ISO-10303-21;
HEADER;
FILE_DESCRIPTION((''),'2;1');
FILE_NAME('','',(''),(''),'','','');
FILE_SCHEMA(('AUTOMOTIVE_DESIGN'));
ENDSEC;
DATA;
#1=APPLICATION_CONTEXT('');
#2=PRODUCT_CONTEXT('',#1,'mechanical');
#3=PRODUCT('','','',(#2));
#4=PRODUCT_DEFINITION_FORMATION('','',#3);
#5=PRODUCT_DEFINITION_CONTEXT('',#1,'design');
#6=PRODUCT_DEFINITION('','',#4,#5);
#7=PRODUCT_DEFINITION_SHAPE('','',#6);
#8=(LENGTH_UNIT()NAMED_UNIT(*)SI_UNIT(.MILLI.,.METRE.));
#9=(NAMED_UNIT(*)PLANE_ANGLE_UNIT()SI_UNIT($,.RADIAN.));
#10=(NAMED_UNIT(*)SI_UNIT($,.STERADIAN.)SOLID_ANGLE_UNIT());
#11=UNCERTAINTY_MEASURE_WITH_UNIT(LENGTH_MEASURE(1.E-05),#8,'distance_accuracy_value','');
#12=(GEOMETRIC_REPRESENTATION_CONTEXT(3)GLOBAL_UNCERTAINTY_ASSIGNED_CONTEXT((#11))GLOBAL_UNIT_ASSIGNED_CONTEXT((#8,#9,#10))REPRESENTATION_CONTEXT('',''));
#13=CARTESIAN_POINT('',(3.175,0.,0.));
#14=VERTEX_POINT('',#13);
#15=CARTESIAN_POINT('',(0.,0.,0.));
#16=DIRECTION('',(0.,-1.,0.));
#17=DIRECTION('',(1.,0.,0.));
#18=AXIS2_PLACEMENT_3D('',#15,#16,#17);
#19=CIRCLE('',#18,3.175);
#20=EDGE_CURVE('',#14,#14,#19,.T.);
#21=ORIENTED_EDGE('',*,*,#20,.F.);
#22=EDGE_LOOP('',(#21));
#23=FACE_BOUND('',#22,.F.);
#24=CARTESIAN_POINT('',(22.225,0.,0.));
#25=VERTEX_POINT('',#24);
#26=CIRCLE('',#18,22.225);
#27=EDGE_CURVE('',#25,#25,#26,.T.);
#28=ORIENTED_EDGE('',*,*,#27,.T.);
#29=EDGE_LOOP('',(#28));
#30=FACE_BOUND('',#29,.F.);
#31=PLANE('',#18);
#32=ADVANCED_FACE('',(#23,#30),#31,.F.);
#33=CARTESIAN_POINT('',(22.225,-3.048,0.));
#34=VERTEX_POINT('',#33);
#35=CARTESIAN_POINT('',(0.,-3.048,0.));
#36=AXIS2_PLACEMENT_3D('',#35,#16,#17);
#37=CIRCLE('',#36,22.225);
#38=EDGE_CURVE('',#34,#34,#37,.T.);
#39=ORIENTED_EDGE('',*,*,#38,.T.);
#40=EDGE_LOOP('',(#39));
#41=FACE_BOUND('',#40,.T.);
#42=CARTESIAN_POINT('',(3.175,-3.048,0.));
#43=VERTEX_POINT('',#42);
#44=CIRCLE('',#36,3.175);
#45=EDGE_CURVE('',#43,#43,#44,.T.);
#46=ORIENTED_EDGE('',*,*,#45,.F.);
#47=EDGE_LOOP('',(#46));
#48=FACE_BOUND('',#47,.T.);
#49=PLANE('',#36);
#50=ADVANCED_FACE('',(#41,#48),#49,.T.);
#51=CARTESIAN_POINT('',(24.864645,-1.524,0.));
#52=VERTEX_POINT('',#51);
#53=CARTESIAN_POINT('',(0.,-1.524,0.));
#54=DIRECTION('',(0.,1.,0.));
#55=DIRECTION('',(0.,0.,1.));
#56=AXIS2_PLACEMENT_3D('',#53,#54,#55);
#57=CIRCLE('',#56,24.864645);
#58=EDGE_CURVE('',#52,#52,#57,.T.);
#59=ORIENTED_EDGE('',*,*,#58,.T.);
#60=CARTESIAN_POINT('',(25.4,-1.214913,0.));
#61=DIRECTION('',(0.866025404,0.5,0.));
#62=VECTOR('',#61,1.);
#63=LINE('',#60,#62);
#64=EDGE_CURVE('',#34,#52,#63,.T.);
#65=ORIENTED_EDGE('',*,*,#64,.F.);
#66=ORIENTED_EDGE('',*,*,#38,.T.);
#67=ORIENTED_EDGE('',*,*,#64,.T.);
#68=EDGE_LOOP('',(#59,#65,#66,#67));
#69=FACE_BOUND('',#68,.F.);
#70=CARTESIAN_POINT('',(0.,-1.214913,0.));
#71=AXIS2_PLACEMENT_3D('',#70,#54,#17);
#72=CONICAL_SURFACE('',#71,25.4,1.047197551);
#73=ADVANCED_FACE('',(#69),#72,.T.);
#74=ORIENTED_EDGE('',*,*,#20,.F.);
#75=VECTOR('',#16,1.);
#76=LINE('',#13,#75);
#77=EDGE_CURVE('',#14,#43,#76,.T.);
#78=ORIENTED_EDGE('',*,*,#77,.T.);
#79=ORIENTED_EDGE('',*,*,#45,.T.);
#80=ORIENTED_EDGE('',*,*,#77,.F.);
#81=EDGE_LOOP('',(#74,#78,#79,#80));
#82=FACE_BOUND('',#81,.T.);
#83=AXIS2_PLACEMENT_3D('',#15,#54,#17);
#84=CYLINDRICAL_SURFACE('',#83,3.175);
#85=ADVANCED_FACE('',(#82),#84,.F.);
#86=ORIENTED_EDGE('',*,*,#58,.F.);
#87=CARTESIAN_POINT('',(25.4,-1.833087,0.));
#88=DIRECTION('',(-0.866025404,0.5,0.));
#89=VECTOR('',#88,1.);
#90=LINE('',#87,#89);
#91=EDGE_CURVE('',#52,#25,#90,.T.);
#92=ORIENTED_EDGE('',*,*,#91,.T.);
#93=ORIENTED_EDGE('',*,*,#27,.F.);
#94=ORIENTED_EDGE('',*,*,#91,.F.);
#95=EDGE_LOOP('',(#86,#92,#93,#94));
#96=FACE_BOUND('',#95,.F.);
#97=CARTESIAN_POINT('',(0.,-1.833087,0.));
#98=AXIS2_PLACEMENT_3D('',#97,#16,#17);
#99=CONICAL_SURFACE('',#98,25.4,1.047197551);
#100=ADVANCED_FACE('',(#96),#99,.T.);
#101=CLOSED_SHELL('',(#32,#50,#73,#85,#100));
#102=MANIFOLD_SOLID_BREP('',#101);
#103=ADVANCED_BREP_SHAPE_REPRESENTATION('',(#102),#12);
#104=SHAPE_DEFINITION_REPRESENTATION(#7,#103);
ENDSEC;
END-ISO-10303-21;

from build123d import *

# Parameters (mm, degrees)
F0_R     = 25.4
F0_R_2   = 3.175
F1_DEPTH = 3.048
F2_SIZE2 = 1.8330871047
F2_SIZE  = 3.175


# Not quite as in the source:
# - a fillet or chamfer that OpenCascade refuses, or shapes differently, is made with other operations: its cross-section is extruded or revolved along the edge and cut away or added


with BuildPart() as f1:
    # F0 (on Front) → F1 (new body)
    with BuildSketch(Plane.XZ):
        Circle(F0_R)
        Circle(F0_R_2, mode=Mode.SUBTRACT)
    extrude(amount=F1_DEPTH)

    # F2
    f2_edges = [f1.edges().sort_by_distance(p)[0] for p in [
        (-25.4, -3.048, 0),
    ]]
    f2_side = f1.faces().sort_by_distance((-24.68158, -3.048, 0))[0]
    chamfer(f2_edges, length=F2_SIZE, length2=F2_SIZE2, reference=f2_side)

    # F3: chamfer of 3.175 x 1.8330871047 on 1 edges, made by hand

    # F3_s1 → F3_t2 (revolve, cut)
    with BuildSketch(Plane.XY):
        Polygon((25.4, -1.8330871047), (22.225, 0), (25.4, 0), align=None)
    revolve(axis=Axis((0, 0, 0), (0, -1, 0)), mode=Mode.SUBTRACT)


solid = f1.part
